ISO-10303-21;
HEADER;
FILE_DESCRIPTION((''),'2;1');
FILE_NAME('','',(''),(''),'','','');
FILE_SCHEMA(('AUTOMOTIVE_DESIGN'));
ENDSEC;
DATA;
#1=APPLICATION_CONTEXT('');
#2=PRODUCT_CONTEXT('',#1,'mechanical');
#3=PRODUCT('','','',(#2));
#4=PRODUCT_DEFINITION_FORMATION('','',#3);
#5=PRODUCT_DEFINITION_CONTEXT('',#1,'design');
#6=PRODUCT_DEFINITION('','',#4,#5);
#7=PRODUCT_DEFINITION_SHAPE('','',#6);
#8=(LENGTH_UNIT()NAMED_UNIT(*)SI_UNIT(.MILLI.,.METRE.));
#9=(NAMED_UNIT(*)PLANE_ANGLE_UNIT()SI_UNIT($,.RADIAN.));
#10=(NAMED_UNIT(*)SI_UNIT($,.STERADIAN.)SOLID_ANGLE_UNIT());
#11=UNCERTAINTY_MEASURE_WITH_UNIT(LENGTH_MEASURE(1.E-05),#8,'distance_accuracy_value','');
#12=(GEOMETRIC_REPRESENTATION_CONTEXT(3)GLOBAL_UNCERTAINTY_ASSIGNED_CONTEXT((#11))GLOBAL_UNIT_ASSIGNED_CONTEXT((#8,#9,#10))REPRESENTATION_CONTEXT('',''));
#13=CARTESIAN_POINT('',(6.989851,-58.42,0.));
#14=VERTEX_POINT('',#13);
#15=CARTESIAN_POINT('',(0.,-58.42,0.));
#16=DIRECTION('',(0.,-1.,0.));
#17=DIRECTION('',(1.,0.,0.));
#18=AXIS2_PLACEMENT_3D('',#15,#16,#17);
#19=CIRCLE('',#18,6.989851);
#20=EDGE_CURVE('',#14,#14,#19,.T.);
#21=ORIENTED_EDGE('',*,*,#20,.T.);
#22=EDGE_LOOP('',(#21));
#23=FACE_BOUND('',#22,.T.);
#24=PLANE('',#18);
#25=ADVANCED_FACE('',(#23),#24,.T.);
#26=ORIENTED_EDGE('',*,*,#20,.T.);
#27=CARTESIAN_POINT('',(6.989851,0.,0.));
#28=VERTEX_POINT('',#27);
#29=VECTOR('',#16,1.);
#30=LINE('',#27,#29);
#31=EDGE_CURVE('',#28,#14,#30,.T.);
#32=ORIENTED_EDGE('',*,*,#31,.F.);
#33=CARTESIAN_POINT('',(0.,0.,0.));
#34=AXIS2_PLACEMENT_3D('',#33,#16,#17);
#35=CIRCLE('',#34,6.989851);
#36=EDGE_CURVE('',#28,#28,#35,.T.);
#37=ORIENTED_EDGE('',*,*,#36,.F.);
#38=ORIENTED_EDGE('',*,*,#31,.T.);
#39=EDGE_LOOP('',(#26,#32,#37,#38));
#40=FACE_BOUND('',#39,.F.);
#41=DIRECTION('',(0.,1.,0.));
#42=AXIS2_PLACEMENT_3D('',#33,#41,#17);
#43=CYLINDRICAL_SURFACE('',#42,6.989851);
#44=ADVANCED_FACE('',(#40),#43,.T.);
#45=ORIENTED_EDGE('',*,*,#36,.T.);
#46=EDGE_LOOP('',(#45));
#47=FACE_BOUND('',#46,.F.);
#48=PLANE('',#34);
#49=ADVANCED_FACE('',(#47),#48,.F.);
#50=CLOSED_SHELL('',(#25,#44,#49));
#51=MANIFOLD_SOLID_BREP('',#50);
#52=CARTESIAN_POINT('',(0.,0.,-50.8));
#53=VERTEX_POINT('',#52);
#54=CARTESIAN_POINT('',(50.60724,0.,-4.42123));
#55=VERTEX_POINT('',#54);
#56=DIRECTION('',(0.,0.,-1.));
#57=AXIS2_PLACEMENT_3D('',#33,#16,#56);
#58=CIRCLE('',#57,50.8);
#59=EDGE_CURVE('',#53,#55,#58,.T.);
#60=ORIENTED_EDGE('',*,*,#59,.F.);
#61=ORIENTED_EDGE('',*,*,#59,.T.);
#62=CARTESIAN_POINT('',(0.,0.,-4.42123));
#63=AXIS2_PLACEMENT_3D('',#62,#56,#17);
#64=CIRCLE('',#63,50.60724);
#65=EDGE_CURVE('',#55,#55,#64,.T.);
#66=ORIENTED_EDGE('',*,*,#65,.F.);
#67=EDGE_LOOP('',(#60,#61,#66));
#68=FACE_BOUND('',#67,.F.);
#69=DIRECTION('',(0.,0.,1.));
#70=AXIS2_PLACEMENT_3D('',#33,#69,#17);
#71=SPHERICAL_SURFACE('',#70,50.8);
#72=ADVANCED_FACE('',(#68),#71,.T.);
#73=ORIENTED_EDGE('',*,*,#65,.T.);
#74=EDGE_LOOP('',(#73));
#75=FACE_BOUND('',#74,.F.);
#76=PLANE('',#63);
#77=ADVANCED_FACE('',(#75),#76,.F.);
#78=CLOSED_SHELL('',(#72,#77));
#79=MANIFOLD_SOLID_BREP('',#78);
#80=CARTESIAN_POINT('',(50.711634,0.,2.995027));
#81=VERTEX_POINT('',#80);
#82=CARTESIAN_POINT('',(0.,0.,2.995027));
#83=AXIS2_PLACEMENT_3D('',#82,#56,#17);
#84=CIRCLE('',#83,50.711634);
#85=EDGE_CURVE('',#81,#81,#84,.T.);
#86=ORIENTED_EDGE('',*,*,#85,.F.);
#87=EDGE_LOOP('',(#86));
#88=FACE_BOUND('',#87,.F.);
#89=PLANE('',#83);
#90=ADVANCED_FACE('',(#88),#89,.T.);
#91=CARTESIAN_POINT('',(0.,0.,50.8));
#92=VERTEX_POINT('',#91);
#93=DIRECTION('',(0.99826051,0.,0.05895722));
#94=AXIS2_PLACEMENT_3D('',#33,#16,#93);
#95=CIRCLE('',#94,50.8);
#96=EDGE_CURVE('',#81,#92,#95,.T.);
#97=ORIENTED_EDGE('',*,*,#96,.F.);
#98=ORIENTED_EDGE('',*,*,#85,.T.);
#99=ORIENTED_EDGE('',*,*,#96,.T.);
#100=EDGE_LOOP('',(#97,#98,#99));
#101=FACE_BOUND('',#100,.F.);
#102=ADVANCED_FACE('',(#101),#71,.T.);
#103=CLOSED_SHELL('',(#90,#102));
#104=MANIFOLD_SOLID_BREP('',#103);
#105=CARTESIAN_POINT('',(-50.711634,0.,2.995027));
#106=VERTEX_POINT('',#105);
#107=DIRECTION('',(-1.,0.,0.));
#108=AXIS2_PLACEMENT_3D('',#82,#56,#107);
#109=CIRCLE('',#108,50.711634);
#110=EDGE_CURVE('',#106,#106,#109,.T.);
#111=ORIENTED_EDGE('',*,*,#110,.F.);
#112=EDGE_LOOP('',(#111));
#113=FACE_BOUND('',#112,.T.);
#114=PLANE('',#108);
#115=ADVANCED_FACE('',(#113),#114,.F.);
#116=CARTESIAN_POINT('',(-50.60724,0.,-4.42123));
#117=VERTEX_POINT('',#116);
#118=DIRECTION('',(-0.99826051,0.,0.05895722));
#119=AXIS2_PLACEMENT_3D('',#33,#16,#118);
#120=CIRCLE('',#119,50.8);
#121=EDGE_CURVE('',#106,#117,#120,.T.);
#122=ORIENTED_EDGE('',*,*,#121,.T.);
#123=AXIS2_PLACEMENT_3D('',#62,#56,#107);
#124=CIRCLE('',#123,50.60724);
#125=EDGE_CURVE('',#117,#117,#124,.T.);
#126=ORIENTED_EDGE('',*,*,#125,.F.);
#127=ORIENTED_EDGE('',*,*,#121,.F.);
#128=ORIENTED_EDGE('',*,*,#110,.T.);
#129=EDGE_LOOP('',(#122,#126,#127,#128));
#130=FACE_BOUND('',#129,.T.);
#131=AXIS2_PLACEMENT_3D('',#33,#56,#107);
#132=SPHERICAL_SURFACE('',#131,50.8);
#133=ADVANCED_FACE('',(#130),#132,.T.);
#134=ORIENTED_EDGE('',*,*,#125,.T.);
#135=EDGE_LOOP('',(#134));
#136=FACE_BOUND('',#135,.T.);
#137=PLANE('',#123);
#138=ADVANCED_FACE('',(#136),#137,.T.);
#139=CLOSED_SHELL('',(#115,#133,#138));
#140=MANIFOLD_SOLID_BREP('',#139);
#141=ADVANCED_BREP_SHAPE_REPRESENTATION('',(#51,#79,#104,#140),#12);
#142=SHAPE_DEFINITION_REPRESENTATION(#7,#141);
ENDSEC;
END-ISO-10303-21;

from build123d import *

# Parameters (mm, degrees)
F5_R     = 6.9898511366
F6_DEPTH = 58.42


# Not quite as in the source:
# - a feature names something its author has since deleted; it is built from what else it names


with BuildPart() as f1:
    # F0 (on Front) → F1 (revolve)
    with BuildSketch(Plane.XZ):
        with BuildLine():
            Line((0, 2.9950267635), (50.7116339185, 2.9950267635))
            ThreePointArc((50.7116339185, 2.9950267635), (34.8460373673, 36.9647626774), (0, 50.8))
            Line((0, 50.8), (0, 2.9950267635))
        make_face()
    revolve(axis=Axis((0, 0, -2.1393038332), (0, 0, -1)))


with BuildPart() as f1b:
    # F0 (on Front) → F1, piece 2 (revolve)
    with BuildSketch(Plane.XZ):
        with BuildLine():
            ThreePointArc((0, -50.8), (34.3223070251, -37.4515585854), (50.6072398558, -4.4212299399))
            Line((50.6072398558, -4.4212299399), (0, -4.4212299399))
            Line((0, -4.4212299399), (0, -50.8))
        make_face()
    revolve(axis=Axis((0, 0, -2.1393038332), (0, 0, -1)))


with BuildPart() as f3:
    # F0 (on Front) → F3 (revolve)
    with BuildSketch(Plane.XZ):
        with BuildLine():
            Line((0, -4.4212299399), (0, 2.9950267635))
            Line((0, 2.9950267635), (-50.7116339185, 2.9950267635))
            ThreePointArc((-50.7116339185, 2.9950267635), (-50.7949678767, -0.7150093742), (-50.6072398558, -4.4212299399))
            Line((-50.6072398558, -4.4212299399), (0, -4.4212299399))
        make_face()
    revolve(axis=Axis((0, 0, -2.5671664625), (0, 0, -1)))


with BuildPart() as f6:
    # F5 (on Front) → F6 (new body)
    with BuildSketch(Plane.XZ):
        Circle(F5_R)
    extrude(amount=F6_DEPTH)


solid = Compound([f1.part, f1b.part, f3.part, f6.part])
